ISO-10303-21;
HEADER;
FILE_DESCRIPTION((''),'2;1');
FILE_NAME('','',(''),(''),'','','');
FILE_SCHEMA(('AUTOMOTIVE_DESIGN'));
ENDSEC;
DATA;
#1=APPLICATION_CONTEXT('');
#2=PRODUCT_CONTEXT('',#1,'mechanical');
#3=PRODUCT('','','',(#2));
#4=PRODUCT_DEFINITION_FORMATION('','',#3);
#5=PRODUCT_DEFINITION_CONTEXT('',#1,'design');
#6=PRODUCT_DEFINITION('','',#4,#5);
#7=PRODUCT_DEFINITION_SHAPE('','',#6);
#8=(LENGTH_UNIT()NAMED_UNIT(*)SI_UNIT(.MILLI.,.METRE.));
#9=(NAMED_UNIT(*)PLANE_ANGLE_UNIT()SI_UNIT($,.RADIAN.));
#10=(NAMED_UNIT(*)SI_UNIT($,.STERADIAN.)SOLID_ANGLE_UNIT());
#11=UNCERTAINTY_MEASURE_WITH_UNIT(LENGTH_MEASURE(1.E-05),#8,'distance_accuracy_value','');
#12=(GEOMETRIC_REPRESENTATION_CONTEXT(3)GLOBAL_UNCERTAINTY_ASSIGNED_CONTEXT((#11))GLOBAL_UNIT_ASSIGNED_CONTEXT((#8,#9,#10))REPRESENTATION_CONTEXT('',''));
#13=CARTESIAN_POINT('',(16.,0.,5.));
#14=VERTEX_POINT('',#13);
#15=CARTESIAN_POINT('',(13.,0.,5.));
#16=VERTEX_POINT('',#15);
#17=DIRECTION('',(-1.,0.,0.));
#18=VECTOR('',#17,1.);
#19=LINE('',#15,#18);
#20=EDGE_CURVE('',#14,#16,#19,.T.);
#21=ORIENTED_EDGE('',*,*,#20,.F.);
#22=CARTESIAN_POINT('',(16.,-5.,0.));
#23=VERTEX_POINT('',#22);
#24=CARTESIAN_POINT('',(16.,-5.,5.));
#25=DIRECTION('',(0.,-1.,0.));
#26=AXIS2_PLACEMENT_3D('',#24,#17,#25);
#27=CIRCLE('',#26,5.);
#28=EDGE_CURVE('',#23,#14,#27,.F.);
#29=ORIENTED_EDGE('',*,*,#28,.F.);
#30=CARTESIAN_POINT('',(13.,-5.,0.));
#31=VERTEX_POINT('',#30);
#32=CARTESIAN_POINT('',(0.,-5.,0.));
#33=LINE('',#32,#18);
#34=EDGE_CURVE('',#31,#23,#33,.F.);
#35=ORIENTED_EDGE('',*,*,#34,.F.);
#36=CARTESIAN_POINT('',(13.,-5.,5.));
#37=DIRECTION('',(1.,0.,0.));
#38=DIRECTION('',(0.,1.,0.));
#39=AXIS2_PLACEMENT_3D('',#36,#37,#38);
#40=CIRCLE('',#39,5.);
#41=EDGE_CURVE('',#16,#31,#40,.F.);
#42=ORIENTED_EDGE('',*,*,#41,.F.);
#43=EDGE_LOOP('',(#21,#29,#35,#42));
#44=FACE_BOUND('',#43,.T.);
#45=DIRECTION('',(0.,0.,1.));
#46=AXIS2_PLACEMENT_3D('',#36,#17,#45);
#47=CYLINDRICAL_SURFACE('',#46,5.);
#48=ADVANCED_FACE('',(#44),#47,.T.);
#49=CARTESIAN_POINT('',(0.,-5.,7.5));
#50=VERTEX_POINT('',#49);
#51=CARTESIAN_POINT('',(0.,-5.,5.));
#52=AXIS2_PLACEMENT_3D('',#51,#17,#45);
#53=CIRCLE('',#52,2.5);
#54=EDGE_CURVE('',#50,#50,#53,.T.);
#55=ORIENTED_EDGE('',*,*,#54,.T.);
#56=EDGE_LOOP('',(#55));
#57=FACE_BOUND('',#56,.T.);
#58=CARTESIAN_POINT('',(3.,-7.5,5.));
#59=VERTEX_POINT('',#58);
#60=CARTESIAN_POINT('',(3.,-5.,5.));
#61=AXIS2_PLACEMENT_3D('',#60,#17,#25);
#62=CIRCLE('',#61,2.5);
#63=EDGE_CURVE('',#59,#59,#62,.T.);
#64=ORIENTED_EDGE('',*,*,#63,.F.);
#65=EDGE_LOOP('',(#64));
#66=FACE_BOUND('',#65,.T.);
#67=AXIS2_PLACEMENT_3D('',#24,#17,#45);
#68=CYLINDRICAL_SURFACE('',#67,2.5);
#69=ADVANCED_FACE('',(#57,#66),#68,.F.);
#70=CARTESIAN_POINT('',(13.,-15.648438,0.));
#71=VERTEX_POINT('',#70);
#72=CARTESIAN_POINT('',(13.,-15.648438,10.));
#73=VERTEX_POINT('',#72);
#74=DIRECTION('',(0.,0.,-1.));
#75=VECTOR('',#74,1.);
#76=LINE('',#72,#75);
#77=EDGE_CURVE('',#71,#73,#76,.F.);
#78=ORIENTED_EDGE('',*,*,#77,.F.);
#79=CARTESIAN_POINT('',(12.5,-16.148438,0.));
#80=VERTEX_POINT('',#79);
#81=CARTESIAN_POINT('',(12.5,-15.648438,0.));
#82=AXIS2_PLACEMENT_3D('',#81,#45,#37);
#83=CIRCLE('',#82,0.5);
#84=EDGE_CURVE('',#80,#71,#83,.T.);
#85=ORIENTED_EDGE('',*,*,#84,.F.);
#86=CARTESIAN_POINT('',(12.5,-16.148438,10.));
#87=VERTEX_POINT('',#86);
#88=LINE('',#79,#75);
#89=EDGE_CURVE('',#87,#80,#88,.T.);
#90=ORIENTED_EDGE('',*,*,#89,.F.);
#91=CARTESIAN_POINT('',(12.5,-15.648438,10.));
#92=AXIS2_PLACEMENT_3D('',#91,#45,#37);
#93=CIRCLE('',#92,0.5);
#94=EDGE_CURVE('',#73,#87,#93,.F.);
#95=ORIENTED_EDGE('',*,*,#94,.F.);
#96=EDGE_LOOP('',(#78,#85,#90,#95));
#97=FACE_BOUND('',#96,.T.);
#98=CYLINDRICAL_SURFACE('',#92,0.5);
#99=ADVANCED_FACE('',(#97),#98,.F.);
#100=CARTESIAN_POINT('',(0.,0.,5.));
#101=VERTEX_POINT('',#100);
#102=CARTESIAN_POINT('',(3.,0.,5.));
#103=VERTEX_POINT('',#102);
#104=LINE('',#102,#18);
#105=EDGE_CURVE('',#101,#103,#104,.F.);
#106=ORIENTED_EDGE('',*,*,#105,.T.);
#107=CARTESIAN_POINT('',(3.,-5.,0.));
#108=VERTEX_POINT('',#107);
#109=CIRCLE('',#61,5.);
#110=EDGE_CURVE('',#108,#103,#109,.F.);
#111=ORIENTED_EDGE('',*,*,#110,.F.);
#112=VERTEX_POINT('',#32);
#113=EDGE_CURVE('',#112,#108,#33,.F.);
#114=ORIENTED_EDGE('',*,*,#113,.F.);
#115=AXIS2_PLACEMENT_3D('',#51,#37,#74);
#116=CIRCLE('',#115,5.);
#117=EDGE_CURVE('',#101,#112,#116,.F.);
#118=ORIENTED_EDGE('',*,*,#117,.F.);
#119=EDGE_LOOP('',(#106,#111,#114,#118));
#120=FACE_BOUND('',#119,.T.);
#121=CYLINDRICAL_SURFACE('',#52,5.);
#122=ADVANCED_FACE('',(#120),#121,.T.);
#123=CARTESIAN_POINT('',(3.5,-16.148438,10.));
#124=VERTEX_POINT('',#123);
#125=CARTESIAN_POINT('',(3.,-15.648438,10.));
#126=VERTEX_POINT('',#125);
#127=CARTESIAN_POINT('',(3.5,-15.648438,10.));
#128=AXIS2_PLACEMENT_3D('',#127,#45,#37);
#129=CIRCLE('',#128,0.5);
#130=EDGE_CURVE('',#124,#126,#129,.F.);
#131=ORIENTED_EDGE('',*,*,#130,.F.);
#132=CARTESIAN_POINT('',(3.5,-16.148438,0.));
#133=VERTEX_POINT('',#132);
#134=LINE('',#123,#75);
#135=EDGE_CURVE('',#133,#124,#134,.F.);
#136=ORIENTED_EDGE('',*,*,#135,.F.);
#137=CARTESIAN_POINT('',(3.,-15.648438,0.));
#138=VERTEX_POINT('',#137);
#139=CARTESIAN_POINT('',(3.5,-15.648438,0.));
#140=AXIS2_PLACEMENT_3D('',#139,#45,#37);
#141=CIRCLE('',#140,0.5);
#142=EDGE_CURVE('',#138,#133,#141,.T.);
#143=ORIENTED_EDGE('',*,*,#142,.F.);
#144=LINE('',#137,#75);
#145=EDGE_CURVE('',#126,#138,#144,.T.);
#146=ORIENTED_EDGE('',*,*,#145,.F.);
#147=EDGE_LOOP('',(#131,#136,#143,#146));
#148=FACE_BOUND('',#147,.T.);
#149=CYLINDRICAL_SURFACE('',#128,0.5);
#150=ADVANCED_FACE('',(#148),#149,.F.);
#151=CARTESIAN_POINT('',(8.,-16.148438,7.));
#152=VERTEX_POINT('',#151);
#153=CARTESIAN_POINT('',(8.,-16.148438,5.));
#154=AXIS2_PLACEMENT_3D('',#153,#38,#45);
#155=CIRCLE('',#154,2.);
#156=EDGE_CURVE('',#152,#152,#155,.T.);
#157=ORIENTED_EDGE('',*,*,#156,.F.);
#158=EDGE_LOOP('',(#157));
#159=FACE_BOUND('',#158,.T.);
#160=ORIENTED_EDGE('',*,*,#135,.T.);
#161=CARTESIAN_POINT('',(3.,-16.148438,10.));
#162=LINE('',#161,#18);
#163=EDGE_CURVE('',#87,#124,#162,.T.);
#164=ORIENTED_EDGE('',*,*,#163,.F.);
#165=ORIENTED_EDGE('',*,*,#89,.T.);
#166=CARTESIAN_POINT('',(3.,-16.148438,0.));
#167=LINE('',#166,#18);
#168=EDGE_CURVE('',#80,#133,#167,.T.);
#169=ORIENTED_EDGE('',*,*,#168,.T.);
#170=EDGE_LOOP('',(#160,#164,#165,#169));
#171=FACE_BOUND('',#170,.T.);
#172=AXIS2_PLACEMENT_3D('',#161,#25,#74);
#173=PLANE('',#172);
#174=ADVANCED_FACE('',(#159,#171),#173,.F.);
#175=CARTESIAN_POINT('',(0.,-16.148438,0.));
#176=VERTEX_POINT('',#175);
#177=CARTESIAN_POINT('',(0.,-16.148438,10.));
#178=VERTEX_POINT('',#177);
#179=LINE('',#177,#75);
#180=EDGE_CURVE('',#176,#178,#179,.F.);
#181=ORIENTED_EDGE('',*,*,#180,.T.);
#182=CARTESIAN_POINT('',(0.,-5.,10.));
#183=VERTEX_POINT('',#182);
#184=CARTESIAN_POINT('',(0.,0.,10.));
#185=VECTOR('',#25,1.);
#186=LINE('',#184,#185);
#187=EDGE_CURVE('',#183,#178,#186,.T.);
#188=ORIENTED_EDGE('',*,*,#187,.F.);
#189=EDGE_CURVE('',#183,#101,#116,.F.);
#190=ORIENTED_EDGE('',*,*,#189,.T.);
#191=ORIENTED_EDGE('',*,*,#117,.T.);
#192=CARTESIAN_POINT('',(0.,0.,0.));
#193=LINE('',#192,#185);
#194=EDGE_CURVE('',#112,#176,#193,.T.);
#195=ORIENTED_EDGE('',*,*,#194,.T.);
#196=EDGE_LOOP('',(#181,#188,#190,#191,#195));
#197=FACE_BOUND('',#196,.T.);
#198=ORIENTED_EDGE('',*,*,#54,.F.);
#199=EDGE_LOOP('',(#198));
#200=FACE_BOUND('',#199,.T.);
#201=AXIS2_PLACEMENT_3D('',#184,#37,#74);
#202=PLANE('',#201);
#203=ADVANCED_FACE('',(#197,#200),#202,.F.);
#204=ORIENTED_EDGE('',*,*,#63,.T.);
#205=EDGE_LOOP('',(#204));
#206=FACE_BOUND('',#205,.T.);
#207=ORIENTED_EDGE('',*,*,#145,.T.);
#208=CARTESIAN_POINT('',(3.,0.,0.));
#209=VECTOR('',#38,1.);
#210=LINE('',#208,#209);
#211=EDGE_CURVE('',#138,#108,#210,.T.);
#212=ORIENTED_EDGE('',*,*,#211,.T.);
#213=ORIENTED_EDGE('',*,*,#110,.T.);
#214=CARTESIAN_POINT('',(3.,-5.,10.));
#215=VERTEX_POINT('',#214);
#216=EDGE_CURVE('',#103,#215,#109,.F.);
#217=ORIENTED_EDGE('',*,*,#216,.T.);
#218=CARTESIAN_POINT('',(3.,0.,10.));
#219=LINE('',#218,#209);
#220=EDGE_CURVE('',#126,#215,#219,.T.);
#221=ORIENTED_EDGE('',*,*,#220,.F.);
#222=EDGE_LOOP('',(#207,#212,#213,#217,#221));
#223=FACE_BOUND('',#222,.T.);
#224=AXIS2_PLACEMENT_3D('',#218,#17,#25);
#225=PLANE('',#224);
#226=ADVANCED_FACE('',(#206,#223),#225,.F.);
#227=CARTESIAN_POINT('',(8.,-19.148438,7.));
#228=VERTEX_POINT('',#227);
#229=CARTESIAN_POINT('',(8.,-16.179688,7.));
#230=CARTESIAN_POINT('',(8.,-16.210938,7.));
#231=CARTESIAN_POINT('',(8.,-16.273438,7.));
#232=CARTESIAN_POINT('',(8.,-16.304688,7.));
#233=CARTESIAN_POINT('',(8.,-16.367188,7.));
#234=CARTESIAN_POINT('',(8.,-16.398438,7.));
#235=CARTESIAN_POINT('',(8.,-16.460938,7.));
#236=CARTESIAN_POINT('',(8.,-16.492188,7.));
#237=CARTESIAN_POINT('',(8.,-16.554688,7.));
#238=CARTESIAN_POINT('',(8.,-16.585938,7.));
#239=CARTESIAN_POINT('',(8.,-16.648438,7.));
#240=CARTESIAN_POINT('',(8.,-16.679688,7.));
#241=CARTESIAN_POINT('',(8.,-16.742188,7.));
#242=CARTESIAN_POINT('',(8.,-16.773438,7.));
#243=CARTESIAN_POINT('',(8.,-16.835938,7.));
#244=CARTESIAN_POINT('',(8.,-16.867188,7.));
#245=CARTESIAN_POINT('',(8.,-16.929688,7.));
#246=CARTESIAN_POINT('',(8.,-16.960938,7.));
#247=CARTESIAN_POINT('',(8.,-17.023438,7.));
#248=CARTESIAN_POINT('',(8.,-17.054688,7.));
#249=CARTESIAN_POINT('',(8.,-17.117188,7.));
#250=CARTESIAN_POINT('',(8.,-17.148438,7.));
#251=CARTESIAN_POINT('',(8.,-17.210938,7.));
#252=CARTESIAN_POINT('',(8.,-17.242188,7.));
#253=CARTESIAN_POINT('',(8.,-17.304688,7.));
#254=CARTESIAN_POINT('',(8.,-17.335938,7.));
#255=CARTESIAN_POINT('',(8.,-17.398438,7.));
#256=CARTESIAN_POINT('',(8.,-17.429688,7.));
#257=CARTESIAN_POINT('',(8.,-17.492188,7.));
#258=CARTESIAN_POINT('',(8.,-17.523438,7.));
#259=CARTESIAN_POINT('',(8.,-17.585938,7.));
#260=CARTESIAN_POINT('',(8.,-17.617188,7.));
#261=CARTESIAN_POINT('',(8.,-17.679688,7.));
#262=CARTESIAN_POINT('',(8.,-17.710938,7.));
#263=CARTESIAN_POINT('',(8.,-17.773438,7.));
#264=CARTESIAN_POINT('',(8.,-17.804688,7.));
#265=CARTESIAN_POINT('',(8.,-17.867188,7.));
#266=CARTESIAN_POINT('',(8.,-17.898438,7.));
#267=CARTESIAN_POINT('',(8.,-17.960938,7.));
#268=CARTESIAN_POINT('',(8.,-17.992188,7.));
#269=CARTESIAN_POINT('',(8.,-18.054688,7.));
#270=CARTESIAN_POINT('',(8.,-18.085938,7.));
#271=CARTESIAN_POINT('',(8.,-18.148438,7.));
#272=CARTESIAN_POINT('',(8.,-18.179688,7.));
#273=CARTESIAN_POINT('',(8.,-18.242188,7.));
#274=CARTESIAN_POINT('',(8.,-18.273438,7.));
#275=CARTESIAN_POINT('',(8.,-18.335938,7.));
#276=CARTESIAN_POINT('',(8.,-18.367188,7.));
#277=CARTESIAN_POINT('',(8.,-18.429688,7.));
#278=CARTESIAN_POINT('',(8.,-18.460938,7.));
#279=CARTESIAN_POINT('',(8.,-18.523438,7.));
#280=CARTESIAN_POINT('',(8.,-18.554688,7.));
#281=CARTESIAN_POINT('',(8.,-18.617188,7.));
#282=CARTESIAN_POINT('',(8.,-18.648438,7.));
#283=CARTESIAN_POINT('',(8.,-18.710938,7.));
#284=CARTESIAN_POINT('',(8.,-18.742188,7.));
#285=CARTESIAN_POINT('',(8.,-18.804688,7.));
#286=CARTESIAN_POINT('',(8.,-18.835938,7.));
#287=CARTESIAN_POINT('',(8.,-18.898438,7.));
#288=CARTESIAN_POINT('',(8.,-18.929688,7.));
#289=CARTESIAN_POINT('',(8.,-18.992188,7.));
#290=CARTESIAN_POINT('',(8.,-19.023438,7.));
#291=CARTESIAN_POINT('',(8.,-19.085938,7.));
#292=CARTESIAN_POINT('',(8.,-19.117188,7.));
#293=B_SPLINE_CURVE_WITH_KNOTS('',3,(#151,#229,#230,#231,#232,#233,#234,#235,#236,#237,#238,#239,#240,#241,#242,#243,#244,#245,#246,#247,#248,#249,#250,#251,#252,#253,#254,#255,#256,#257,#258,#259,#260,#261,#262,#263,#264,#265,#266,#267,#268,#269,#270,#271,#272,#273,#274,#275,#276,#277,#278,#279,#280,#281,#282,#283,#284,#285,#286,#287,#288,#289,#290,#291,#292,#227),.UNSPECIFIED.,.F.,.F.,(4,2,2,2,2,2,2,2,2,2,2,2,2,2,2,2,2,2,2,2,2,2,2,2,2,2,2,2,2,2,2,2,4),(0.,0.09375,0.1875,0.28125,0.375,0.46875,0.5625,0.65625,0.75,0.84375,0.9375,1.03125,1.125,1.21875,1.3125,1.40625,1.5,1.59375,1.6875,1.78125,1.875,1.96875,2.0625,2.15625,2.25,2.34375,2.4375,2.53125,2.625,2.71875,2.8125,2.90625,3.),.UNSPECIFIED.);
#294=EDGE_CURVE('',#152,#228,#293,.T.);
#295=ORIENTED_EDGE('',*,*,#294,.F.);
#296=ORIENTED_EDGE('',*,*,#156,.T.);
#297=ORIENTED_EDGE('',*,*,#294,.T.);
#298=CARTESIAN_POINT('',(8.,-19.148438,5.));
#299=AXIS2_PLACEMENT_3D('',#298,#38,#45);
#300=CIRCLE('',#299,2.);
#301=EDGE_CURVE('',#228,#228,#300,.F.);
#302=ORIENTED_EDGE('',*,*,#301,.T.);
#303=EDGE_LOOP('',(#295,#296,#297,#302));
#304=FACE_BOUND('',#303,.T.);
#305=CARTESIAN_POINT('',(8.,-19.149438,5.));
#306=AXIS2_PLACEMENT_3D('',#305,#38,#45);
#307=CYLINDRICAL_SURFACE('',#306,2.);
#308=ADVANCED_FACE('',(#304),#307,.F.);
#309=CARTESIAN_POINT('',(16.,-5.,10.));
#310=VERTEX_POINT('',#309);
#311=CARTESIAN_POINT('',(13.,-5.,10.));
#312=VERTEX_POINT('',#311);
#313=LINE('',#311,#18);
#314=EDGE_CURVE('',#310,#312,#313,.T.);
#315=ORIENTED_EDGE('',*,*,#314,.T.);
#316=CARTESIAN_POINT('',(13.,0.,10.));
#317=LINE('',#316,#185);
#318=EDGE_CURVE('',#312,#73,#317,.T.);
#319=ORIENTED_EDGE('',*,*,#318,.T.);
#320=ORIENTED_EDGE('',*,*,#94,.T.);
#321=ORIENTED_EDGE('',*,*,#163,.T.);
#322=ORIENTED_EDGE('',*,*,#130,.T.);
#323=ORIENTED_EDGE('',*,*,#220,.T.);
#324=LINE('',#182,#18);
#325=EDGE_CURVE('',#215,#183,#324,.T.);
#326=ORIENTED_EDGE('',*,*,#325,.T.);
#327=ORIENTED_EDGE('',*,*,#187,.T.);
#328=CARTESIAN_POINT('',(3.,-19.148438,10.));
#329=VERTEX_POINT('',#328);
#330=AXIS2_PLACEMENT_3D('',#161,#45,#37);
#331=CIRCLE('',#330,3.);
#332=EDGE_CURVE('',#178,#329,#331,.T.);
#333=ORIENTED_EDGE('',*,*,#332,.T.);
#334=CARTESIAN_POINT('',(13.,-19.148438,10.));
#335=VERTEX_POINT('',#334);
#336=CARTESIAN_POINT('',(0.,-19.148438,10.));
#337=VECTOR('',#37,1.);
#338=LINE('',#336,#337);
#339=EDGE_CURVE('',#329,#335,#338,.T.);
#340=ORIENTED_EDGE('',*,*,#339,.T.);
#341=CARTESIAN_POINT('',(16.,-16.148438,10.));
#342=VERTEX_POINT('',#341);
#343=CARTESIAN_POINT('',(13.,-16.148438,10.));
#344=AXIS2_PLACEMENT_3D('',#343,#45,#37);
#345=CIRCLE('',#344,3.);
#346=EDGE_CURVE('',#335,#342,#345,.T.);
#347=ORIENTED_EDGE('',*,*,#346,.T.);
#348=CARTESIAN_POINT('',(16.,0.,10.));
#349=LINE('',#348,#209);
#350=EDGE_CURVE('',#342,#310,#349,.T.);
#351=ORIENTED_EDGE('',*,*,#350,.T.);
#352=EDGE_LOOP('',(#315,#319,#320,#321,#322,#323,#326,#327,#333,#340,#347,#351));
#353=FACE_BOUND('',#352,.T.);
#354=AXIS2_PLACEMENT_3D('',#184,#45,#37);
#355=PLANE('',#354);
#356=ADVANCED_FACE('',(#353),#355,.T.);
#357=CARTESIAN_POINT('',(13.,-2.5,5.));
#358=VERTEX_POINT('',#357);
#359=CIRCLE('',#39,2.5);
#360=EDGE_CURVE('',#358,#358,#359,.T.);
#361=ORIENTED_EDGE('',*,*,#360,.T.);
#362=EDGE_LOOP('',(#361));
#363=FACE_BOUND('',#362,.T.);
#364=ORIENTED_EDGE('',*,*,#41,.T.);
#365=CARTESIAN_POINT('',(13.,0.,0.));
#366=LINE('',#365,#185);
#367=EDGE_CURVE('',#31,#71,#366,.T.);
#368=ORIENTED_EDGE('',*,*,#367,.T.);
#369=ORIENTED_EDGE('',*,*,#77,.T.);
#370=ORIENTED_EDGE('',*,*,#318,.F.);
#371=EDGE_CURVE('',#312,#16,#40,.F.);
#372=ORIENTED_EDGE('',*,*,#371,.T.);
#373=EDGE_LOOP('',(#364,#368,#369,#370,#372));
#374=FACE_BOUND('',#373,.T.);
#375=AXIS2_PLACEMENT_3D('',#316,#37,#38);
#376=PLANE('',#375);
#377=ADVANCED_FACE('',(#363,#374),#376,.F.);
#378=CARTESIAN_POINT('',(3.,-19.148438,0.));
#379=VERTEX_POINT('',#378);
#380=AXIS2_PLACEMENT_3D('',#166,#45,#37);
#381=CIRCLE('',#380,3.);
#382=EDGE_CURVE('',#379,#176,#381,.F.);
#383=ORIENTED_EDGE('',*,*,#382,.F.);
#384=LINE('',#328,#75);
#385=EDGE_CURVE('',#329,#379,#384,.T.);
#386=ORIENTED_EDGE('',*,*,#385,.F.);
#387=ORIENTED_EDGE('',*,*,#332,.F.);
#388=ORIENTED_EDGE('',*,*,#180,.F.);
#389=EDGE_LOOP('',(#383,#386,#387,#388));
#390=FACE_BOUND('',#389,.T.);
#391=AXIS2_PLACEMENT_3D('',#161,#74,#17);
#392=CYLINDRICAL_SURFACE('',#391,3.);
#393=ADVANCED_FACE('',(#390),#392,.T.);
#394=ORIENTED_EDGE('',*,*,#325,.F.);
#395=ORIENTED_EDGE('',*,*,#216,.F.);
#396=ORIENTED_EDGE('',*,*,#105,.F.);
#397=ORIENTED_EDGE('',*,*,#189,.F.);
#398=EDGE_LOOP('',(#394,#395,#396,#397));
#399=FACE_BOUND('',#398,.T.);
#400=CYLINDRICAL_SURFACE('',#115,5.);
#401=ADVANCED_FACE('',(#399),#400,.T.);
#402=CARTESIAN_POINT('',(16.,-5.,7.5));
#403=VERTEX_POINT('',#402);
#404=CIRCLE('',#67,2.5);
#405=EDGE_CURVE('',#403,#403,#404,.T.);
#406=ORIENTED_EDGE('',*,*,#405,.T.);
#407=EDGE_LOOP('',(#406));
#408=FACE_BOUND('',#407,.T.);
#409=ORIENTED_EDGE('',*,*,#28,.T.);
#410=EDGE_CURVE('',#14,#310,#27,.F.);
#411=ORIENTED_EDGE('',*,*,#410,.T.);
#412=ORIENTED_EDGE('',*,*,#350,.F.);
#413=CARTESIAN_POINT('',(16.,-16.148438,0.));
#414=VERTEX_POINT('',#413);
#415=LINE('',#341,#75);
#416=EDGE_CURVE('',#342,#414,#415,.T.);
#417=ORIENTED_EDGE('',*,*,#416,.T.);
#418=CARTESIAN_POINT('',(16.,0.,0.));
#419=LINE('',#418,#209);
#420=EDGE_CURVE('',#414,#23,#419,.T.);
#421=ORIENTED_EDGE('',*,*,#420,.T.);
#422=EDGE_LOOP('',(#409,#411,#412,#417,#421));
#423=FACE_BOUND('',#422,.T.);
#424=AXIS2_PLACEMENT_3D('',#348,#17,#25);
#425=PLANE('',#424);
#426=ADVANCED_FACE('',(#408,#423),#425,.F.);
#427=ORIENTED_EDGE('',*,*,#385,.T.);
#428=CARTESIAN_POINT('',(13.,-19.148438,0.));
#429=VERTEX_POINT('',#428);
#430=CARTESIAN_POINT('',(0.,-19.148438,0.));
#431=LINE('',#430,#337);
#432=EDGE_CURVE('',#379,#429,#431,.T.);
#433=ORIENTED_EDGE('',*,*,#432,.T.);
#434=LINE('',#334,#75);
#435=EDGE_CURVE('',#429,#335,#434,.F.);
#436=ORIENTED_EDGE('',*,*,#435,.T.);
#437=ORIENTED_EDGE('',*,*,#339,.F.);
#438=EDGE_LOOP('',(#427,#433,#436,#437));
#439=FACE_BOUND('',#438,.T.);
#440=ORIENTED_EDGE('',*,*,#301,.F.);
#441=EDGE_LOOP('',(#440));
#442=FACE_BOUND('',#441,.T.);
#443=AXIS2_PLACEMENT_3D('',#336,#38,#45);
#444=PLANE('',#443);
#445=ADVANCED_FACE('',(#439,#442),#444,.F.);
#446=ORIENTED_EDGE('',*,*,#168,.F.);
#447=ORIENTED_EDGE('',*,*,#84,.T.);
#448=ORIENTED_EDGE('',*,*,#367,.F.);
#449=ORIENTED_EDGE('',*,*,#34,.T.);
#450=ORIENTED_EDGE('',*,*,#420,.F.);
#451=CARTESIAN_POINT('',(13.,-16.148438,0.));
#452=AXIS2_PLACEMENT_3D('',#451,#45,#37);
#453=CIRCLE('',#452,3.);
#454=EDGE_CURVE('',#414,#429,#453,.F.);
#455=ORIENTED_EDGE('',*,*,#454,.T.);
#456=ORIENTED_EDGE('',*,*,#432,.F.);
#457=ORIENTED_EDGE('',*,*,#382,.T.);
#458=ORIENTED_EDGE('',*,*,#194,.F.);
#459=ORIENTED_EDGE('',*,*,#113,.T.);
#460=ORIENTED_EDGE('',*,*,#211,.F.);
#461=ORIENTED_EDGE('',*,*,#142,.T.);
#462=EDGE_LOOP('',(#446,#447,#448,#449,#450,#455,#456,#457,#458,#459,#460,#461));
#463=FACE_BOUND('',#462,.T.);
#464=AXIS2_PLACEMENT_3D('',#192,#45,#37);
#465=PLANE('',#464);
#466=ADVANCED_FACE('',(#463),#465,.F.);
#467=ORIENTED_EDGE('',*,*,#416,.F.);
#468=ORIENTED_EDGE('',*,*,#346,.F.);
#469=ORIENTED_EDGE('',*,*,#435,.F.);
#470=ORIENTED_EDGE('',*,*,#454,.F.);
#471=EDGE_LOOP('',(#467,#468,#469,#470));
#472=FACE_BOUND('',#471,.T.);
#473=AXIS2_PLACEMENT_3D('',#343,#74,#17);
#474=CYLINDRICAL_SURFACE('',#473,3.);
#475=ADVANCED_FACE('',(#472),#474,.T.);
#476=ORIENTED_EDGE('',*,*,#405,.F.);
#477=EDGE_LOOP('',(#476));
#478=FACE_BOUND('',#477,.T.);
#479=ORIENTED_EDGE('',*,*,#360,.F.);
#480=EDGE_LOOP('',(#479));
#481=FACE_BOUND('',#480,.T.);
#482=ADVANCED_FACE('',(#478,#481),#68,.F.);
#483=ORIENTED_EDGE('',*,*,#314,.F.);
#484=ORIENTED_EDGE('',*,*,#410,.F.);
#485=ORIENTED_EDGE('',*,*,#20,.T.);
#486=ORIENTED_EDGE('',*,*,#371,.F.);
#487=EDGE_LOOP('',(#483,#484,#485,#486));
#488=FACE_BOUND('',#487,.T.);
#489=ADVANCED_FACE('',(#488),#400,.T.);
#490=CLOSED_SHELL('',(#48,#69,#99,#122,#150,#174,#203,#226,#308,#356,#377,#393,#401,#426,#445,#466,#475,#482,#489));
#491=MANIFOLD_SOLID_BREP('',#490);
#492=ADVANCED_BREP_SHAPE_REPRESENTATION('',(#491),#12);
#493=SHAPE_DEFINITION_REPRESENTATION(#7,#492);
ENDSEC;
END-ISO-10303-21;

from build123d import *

# Parameters (mm, degrees)
BOSS_EXTRUDE1_DEPTH = 10
SKETCH2_R           = 2.5
CUT_EXTRUDE1_DEPTH  = 27.882385658
CUT_EXTRUDE2_REACH  = 26.835
SKETCH3_R           = 2
FILLET1_R           = 5
FILLET2_R           = 3
FILLET3_R           = 0.5


with BuildPart() as part:
    # Sketch1 → Boss-Extrude1 (new body)
    with BuildSketch(Plane.XY):
        Polygon((13, 0), (16, 0), (16, -19.1484375), (0, -19.1484375), (0, 0), (3, 0), (3, -16.1484375), (13, -16.1484375), align=None)
    extrude(amount=BOSS_EXTRUDE1_DEPTH)

    # Sketch2 → Cut-Extrude1 (cut, through all)
    with BuildSketch(Plane.ZY):
        with Locations((5, -5)):
            Circle(SKETCH2_R)
    extrude(amount=-CUT_EXTRUDE1_DEPTH, mode=Mode.SUBTRACT)

    # Sketch3 → Cut-Extrude2 (cut, up to next)
    with BuildSketch(Plane(origin=(0, -16.1484375, 0), x_dir=(1, 0, 0), z_dir=(0, 1, 0)), mode=Mode.PRIVATE) as cut_extrude2_sk1:
        with Locations(Location((8, -5, 0), (0, 0, 270))):
            Circle(SKETCH3_R)
    cut_extrude2_tool1 = extrude(cut_extrude2_sk1.sketch, amount=-CUT_EXTRUDE2_REACH, mode=Mode.PRIVATE) & part.part
    add(cut_extrude2_tool1.solids().sort_by_distance((8, -16.148438, 5))[0], mode=Mode.SUBTRACT)

    # Fillet1
    fillet1_edges = [part.edges().sort_by_distance(p)[0] for p in [
        (14.5, 0, 10),
        (14.5, 0, 0),
        (1.5, 0, 0),
        (1.5, 0, 10),
    ]]
    fillet(fillet1_edges, radius=FILLET1_R - 0.0001)  # a hair under: the kernel refuses the full size

    # Fillet2
    fillet2_edges = [part.edges().sort_by_distance(p)[0] for p in [
        (16, -19.1484375, 5),
        (0, -19.1484375, 5),
    ]]
    fillet(fillet2_edges, radius=FILLET2_R)

    # Fillet3
    fillet3_edges = [part.edges().sort_by_distance(p)[0] for p in [
        (3, -16.1484375, 5),
        (13, -16.1484375, 5),
    ]]
    fillet(fillet3_edges, radius=FILLET3_R)


solid = part.part
